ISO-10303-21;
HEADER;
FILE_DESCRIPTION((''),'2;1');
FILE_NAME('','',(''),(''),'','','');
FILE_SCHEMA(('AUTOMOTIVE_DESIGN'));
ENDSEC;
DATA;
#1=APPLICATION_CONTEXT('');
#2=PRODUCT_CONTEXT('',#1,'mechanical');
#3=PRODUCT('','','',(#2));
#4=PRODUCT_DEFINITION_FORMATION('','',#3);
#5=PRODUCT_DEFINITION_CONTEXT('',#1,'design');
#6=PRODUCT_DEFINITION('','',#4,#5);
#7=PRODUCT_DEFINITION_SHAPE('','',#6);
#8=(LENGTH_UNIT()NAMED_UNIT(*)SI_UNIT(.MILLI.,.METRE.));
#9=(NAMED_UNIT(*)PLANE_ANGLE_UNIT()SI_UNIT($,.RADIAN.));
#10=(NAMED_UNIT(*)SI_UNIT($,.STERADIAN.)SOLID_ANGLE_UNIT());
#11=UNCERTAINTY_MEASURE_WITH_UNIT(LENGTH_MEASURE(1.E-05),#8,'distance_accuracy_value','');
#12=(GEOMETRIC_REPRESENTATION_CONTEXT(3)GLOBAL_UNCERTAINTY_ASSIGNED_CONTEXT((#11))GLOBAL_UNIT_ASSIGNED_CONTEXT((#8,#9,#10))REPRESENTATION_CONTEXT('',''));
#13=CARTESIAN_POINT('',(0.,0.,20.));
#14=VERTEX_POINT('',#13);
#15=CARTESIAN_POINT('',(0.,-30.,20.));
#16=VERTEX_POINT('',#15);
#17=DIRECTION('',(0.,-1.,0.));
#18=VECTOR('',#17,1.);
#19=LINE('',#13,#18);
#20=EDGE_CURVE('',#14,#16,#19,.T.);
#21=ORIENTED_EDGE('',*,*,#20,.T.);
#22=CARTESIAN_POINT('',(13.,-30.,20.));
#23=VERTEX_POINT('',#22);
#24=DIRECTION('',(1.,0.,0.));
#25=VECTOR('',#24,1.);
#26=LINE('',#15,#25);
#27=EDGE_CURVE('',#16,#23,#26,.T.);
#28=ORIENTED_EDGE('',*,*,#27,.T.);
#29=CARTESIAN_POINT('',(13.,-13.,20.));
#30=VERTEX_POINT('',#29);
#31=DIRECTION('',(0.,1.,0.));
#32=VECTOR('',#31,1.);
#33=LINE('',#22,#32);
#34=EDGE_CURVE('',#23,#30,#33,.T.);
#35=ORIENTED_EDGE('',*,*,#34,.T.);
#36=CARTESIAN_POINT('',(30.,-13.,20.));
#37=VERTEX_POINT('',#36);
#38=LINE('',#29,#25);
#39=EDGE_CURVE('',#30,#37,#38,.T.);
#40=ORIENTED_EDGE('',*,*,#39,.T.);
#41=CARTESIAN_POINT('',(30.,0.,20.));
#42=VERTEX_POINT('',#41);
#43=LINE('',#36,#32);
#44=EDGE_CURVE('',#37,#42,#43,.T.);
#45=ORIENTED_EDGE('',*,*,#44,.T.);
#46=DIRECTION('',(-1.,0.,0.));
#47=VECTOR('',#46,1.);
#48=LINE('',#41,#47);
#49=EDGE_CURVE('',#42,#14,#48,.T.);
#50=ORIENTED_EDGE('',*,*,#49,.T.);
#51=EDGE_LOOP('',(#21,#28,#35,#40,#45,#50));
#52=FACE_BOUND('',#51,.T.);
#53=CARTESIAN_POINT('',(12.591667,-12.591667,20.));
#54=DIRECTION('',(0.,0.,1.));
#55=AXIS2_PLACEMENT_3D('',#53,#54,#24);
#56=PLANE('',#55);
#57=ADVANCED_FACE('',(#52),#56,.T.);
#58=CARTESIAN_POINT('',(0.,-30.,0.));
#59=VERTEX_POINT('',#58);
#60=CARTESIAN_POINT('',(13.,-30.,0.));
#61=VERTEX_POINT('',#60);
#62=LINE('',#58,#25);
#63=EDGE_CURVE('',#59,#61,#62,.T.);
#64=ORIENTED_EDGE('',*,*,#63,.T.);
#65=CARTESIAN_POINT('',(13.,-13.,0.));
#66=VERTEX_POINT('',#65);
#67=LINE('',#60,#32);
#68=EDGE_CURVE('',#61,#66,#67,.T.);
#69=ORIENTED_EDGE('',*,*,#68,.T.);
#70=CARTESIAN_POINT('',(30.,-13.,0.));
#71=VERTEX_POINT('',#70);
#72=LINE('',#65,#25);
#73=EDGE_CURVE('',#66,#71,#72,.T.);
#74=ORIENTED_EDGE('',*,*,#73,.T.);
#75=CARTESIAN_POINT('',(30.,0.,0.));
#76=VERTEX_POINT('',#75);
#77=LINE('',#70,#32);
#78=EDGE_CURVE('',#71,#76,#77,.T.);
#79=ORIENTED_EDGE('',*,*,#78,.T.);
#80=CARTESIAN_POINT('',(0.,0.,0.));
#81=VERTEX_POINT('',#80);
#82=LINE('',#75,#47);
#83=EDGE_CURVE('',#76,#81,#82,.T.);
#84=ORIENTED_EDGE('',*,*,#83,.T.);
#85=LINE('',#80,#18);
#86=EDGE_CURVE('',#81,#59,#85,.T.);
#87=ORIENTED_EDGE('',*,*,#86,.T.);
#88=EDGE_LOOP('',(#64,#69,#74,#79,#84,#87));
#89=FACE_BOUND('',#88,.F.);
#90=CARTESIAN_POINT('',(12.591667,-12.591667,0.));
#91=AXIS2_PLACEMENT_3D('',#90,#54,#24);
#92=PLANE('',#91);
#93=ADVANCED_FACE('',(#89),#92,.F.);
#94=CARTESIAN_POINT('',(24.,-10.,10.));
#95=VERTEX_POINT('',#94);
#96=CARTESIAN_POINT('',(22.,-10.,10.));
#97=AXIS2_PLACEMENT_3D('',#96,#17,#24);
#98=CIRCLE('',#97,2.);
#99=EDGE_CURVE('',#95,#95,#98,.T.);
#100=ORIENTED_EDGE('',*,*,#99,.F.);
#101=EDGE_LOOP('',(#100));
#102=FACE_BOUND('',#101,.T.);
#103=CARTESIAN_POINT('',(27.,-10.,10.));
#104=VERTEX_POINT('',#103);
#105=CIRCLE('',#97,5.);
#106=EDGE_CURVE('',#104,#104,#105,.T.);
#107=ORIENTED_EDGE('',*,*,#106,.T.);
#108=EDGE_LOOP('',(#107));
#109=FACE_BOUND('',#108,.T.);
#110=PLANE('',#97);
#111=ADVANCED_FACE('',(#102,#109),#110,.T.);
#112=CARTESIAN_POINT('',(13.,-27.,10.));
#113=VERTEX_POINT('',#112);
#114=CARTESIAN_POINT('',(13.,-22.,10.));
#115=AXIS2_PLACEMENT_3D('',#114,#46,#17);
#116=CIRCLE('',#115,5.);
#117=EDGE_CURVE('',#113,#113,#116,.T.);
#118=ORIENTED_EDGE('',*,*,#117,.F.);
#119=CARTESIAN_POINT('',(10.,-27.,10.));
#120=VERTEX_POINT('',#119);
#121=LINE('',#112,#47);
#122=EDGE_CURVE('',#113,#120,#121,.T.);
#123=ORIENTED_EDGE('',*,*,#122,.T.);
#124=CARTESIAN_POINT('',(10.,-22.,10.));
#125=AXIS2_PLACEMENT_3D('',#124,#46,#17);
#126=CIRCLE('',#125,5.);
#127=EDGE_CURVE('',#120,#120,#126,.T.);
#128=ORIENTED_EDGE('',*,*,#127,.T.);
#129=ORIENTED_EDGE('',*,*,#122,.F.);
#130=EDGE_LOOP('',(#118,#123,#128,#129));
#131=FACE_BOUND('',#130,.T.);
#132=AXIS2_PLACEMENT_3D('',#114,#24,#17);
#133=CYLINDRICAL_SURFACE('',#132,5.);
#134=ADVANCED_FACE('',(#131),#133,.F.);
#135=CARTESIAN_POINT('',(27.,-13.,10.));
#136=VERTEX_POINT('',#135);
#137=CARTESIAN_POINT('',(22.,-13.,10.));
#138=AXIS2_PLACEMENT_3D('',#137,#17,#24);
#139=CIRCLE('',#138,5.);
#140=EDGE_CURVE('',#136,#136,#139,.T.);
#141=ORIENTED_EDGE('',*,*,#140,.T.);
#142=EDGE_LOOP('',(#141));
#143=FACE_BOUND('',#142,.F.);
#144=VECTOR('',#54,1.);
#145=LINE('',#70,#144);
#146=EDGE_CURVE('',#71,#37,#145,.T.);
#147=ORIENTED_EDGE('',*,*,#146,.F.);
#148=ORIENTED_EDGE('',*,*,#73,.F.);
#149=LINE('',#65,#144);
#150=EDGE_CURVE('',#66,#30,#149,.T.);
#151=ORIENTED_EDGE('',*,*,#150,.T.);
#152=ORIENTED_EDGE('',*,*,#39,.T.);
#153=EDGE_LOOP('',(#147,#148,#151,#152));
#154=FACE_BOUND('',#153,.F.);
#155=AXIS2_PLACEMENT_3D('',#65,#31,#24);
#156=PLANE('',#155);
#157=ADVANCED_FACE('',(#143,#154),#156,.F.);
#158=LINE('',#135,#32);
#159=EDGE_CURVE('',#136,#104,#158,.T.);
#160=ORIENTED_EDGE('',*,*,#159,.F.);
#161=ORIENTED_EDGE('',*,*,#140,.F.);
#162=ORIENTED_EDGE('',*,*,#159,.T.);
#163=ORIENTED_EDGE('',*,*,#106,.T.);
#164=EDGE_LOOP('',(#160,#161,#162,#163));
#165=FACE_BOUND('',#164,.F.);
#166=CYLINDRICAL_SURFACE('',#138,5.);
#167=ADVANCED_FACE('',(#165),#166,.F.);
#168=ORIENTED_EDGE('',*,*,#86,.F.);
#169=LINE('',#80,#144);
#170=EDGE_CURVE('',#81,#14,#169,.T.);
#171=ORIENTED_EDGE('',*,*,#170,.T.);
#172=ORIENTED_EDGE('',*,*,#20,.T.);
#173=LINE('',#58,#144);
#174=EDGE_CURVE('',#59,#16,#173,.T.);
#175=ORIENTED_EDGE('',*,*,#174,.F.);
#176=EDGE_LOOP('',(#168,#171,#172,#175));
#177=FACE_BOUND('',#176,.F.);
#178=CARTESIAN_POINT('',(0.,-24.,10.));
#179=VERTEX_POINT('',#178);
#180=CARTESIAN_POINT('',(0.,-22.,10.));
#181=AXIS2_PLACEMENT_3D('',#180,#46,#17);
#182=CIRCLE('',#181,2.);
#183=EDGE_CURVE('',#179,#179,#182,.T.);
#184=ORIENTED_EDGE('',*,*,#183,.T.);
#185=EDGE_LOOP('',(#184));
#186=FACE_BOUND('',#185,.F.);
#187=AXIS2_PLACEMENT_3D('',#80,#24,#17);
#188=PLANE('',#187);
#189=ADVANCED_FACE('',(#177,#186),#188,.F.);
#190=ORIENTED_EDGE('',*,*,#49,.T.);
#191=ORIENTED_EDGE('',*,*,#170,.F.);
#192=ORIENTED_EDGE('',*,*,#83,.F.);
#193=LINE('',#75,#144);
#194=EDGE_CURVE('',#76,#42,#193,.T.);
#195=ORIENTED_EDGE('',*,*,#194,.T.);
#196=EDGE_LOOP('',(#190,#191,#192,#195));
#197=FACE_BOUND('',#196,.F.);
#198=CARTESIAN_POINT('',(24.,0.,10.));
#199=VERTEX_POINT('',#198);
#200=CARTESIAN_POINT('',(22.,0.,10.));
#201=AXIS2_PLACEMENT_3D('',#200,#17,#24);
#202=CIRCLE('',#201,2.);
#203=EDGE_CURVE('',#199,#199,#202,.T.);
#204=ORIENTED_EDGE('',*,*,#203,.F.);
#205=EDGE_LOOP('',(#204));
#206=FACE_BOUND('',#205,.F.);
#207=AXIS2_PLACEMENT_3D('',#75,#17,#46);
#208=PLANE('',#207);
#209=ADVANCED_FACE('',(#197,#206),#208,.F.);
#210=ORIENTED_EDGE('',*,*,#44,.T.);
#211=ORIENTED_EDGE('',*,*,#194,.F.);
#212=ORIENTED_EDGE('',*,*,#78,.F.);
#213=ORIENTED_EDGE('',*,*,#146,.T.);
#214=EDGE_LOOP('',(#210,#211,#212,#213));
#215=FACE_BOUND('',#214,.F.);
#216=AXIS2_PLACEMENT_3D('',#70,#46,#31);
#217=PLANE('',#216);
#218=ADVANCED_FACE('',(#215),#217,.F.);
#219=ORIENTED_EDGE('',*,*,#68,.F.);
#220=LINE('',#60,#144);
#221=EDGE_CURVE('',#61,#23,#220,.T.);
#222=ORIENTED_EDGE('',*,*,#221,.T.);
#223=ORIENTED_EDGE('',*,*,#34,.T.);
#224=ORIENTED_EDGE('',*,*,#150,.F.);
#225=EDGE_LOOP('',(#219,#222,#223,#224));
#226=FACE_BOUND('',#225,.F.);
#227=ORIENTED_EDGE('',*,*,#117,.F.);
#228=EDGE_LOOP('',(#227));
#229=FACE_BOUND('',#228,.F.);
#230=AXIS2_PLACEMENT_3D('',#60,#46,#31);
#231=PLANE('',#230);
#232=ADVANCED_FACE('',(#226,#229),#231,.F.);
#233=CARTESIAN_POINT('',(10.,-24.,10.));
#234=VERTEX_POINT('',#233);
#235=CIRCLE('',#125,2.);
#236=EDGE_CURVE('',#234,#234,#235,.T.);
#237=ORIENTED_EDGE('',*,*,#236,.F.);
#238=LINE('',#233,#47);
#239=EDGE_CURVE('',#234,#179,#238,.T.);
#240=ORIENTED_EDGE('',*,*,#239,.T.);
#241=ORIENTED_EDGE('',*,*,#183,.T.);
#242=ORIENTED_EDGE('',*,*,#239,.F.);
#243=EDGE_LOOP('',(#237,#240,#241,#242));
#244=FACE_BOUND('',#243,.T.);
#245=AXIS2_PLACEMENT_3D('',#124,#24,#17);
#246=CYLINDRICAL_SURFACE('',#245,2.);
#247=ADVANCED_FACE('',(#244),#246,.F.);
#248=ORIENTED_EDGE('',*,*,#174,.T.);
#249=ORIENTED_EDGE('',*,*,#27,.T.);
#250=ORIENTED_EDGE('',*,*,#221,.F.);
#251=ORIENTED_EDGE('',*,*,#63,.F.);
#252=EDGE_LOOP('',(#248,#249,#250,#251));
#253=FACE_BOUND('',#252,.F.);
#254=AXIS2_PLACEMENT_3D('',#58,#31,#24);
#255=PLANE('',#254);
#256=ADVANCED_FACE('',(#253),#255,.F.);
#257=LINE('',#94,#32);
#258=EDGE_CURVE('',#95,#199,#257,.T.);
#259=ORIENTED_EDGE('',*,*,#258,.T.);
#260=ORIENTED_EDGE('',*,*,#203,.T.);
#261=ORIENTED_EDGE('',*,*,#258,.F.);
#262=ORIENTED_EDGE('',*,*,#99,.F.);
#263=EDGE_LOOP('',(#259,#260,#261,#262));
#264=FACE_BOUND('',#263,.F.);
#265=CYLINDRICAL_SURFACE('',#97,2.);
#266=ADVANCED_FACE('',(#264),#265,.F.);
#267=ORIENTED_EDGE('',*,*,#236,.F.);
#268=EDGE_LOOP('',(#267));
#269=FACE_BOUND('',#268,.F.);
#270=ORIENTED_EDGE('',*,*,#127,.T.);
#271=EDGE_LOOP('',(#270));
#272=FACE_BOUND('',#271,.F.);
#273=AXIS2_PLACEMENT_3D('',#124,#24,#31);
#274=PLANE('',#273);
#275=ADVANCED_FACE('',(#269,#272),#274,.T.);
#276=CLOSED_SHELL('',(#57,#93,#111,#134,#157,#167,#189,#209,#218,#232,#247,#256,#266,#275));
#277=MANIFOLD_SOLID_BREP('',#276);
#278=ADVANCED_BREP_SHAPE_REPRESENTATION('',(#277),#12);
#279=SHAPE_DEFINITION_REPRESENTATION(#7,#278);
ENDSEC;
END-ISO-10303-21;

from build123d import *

# Parameters (mm, degrees)
F1_DEPTH = 20
F2_R     = 5
F3_DEPTH = 3
F4_R     = 2
F5_DEPTH = 10


# Not quite as in the source:
# - a pattern or mirror of a feature is missing from the dataset's text; its kind, count and spacing are read off the source's solid


with BuildPart() as f1:
    # F0 (on Top) → F1 (new body)
    with BuildSketch(Plane.XY):
        Polygon((30, 0), (0, 0), (0, -30), (13, -30), (13, -13), (30, -13), align=None)
    extrude(amount=F1_DEPTH)

    # F2 (on face) → F3 (cut)
    with BuildSketch(Plane.XZ.offset(13)):
        with Locations((22, 10)):
            Circle(F2_R)
    f3 = extrude(amount=-F3_DEPTH, mode=Mode.SUBTRACT)

    # F3_copies: F3 across plane
    add(f3.mirror(Plane(origin=(0, 0, 0), x_dir=(0.7071067812, -0.7071067812, 0), z_dir=(-0.7071067812, -0.7071067812, 0))), mode=Mode.SUBTRACT)

    # F4 (on face) → F5 (cut, through all)
    with BuildSketch(Plane.XZ.offset(10)):
        with Locations((22, 10)):
            Circle(F4_R)
    f5 = extrude(amount=-F5_DEPTH, mode=Mode.SUBTRACT)

    # F5_copies: F5 across plane
    add(f5.mirror(Plane(origin=(0, 0, 0), x_dir=(-0.7071067812, 0.7071067812, 0), z_dir=(-0.7071067812, -0.7071067812, 0))), mode=Mode.SUBTRACT)


solid = f1.part
